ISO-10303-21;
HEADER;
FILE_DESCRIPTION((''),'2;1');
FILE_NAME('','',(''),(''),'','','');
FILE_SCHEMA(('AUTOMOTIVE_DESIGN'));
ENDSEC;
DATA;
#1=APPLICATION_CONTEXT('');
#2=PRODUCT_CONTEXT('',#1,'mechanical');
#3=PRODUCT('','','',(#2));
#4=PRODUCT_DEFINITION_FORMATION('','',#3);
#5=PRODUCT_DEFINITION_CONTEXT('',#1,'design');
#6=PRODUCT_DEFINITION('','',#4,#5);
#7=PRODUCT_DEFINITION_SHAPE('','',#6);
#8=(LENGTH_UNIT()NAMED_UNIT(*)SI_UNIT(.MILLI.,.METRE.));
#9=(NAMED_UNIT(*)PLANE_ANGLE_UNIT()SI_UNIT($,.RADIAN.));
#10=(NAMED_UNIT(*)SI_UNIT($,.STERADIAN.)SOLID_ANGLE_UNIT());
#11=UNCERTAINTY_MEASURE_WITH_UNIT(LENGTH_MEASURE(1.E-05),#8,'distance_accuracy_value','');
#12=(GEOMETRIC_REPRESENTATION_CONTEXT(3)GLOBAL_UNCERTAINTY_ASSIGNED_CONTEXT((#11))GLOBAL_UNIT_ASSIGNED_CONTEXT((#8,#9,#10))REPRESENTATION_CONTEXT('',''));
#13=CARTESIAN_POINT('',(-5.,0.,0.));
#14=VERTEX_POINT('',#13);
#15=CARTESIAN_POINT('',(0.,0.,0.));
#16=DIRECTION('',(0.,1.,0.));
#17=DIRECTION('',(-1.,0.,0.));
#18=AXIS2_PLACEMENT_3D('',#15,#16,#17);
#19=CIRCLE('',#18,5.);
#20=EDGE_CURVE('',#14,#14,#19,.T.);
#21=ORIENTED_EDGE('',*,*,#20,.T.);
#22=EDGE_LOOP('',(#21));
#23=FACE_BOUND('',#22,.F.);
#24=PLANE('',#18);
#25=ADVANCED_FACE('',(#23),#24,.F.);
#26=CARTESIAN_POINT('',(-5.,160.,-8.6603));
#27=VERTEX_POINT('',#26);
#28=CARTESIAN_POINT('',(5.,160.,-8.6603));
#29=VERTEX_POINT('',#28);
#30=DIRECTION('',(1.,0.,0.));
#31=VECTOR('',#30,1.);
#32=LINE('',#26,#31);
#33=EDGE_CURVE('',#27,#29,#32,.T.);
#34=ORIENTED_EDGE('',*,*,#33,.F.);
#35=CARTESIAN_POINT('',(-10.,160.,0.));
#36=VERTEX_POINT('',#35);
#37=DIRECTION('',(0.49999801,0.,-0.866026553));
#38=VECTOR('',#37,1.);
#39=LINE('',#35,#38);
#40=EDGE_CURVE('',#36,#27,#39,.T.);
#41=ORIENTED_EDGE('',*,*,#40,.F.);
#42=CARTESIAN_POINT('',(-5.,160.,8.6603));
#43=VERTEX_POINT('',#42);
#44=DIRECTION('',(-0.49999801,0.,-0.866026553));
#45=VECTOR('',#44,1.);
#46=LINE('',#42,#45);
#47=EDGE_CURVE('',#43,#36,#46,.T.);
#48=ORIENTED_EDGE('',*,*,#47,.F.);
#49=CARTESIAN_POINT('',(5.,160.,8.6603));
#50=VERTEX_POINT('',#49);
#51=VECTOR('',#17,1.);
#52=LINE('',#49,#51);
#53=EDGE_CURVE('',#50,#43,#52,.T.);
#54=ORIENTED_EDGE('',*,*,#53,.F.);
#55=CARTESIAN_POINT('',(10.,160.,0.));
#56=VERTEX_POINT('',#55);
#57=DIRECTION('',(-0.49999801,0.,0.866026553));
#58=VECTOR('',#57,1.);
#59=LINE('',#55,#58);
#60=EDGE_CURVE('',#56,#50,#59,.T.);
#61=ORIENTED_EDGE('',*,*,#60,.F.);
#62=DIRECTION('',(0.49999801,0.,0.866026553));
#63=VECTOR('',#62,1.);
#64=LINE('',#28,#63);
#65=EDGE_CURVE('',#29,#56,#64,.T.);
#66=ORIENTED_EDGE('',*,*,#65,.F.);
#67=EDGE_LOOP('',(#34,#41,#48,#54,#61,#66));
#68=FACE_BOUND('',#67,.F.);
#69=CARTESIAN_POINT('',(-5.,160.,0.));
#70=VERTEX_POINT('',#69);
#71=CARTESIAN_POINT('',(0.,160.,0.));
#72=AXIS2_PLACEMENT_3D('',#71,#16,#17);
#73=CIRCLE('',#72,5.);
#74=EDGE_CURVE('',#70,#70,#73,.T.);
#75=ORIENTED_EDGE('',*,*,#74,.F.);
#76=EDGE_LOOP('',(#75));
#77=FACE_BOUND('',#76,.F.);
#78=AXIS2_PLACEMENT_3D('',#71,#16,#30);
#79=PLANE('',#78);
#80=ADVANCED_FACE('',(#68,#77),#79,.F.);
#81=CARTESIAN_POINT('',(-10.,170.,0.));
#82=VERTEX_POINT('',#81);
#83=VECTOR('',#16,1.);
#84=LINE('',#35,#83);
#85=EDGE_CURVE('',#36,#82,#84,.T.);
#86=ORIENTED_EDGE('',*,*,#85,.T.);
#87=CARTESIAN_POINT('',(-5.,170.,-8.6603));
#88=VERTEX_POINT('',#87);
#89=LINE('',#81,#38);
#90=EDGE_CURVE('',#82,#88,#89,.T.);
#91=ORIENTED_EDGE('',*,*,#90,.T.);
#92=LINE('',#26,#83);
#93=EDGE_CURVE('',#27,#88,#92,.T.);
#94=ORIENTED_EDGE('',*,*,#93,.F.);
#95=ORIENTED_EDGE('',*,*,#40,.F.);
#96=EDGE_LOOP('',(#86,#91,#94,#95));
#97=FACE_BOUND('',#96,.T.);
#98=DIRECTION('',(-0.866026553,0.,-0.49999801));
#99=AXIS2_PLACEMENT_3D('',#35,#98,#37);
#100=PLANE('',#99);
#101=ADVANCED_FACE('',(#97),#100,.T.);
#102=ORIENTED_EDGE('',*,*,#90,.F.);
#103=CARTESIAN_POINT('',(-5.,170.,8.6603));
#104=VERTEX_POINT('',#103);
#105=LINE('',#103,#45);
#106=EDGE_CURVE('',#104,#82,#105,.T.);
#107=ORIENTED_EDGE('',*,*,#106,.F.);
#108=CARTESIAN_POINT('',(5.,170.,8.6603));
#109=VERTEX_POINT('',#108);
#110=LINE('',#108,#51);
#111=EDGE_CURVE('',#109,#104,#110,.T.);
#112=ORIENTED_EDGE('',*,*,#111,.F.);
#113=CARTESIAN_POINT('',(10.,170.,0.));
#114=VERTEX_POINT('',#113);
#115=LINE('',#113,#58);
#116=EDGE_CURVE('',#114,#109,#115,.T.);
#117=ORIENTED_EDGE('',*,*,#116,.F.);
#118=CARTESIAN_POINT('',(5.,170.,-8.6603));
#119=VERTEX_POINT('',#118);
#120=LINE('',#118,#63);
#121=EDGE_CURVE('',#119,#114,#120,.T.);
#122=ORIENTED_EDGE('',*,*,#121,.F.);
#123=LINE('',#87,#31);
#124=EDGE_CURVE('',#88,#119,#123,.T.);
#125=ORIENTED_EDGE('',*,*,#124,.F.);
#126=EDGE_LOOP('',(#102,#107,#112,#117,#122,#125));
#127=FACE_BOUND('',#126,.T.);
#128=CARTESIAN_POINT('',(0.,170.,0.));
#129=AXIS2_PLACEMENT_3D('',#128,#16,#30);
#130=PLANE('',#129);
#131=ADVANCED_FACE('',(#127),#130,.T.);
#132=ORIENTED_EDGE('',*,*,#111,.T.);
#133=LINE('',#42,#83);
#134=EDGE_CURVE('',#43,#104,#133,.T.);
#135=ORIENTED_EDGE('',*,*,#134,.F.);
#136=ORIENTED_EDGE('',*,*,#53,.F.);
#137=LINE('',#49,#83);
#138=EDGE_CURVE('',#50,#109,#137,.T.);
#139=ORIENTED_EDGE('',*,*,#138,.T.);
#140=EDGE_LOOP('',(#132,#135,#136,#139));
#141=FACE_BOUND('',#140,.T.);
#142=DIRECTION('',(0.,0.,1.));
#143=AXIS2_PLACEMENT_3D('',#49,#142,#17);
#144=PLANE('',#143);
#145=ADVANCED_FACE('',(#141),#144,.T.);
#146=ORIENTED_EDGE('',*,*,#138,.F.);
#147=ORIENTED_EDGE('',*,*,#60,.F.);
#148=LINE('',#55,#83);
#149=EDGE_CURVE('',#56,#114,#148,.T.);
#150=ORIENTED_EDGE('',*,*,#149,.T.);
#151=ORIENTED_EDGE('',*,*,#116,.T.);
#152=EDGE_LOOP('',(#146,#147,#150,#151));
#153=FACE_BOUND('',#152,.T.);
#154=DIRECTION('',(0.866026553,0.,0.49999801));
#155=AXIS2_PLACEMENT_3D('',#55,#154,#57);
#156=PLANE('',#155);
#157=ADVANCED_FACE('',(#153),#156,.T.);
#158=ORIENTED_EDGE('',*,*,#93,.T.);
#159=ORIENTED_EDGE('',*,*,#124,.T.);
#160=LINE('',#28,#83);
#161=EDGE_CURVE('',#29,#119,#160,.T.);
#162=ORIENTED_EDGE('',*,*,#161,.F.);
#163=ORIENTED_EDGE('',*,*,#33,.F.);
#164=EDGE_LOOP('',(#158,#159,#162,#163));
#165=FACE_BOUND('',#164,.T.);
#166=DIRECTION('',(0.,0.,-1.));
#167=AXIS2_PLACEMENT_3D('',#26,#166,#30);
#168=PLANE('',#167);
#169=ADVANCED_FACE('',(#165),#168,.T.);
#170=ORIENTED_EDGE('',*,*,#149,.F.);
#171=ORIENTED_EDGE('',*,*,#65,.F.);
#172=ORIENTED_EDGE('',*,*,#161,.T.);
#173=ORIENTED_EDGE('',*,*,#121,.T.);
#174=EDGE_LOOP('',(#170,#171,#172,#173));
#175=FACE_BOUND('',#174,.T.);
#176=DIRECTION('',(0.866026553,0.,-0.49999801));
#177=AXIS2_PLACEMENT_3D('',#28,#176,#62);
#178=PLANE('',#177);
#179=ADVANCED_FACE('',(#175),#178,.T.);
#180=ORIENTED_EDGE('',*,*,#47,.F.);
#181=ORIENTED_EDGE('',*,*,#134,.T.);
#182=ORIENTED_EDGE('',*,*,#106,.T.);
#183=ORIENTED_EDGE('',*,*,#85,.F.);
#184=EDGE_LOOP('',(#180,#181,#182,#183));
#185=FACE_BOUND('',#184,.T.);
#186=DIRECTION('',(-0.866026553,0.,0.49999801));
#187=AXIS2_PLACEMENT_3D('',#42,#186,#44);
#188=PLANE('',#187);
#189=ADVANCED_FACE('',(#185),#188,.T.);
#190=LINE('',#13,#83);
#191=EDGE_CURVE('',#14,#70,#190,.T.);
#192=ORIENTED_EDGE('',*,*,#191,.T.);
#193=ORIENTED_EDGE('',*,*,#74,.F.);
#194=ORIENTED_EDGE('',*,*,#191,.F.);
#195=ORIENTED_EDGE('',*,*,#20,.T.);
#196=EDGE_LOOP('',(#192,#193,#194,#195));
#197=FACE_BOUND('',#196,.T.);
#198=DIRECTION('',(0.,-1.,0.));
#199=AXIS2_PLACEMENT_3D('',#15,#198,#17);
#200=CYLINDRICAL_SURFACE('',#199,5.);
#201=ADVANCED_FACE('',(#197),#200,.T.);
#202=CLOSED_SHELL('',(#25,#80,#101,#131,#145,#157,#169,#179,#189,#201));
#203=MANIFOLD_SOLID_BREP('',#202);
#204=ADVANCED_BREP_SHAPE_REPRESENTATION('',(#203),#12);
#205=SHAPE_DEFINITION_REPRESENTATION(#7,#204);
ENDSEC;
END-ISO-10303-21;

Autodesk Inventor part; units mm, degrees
ref_plane "YZ Plane" through (0, 0, 0) normal (1, 0, 0) x (0, 1, 0)
ref_plane "XZ Plane" through (0, 0, 0) normal (0, 1, 0) x (-1, 0, 0)
ref_plane "XY Plane" through (0, 0, 0) normal (0, 0, 1) x (1, 0, 0)
sketch "Sketch1" plane through (0, 0, 0) normal (0, 1, 0) x (-1, 0, 0)
  circle A0 centre (0, 0) radius 5
  dimension "d0" = 10
extrude "Extrusion1" add sketch "Sketch1" along normal blind 160
thread "Thread1" size "M10x1" class "6g" standard "ISO Metric profile" length 10
sketch "Sketch2" plane through (0, 160, 0) normal (0, 1, 0) x (1, 0, 0)
  circle A0 centre (0, 0) radius 5 projected
  circle A1 centre (0, 0) radius 10 construction
  line L0 (-10, 0) -> (-5, 8.6603)
  line L1 (-5, 8.6603) -> (5, 8.6603)
  line L2 (5, 8.6603) -> (10, 0)
  line L3 (10, 0) -> (5, -8.6603)
  line L4 (5, -8.6603) -> (-5, -8.6603)
  line L5 (-5, -8.6603) -> (-10, 0)
  dimension "d5" = 20
extrude "Extrusion2" add sketch "Sketch2" along normal blind 10 contours A0 | L0 L1 L2 L3 L4 L5
properties part number "BoltA" material "Titanium"
